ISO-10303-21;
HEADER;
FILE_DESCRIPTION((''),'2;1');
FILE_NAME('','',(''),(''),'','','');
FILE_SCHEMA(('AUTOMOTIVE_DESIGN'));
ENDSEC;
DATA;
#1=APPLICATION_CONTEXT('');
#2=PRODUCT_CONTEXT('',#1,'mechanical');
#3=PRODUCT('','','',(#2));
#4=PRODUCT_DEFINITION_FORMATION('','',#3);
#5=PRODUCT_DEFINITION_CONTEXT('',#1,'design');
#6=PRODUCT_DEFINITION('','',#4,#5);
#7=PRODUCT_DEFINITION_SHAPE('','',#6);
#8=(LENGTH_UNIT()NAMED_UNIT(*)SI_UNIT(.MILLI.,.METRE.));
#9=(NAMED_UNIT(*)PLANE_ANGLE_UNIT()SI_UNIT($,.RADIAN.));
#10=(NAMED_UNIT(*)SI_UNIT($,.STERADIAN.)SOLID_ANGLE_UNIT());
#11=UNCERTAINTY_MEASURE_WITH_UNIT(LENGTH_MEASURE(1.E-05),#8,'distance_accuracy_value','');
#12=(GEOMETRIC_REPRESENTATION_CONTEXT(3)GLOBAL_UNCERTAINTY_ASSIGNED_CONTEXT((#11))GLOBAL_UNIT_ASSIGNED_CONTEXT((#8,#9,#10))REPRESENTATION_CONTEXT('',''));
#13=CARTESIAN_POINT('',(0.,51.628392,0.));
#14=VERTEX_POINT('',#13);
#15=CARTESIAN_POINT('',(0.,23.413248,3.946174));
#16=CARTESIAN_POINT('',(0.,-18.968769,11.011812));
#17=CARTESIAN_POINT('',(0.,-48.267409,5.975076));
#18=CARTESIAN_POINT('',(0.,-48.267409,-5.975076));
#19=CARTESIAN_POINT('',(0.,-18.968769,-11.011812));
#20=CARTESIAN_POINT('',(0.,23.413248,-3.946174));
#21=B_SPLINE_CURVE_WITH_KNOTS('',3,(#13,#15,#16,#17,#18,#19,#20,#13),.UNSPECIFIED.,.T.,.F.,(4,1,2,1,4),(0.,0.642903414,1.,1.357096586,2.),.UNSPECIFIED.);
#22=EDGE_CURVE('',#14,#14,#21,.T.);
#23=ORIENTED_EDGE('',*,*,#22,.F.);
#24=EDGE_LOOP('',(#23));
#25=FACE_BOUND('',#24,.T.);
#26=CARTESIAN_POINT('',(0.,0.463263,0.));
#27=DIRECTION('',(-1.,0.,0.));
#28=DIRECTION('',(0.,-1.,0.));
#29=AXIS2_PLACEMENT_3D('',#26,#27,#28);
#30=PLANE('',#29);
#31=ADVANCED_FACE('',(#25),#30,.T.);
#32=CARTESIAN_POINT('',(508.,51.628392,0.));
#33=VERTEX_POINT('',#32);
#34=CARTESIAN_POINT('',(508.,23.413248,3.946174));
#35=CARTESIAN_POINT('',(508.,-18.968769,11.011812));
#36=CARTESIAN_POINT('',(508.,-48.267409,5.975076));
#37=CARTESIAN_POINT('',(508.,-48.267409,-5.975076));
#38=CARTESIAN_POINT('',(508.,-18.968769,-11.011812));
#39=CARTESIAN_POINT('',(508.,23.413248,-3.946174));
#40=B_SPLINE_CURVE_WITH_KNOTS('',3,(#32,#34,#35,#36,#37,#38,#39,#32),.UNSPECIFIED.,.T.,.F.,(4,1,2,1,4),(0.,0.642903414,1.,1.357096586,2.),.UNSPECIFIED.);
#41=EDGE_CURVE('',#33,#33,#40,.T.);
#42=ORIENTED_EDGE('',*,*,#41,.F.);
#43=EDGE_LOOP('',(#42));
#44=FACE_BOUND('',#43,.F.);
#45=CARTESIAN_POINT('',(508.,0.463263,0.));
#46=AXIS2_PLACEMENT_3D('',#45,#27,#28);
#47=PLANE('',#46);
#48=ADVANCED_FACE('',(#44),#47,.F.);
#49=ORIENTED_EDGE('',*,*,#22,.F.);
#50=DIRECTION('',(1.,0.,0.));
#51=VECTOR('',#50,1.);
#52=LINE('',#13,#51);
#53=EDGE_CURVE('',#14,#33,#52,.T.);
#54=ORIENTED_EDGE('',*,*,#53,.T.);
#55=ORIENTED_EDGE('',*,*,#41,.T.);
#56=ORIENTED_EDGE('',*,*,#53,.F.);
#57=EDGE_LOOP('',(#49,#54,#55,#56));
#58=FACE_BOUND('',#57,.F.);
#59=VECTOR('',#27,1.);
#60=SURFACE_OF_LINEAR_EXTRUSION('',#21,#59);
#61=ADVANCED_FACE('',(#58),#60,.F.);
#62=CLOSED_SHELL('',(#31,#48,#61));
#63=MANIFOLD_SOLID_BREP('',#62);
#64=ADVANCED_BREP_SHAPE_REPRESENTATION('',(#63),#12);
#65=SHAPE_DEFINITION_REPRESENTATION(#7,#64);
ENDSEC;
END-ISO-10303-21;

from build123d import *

# Parameters (mm, degrees)
F1_DEPTH = 508


with BuildPart() as f1:
    # F0 (on Right) → F1 (new body)
    with BuildSketch(Plane.YZ):
        with BuildLine():
            add(Edge.make_bspline(
                [(-48.2674092054, 0), (-48.2674092054, 5.9750759974), (-18.9687694723, 11.0118121173), (23.4132478852, 3.9461736604), (51.6283921897, 0)],
                knots=[0, 0, 0, 0, 0.357096586, 1, 1, 1, 1], degree=3))
            add(Edge.make_bspline(
                [(-48.2674092054, 0), (-48.2674092054, -5.9750759974), (-18.9687694723, -11.0118121173), (23.4132478852, -3.9461736604), (51.6283921897, 0)],
                knots=[0, 0, 0, 0, 0.357096586, 1, 1, 1, 1], degree=3))
        make_face()
    extrude(amount=F1_DEPTH)


solid = f1.part
